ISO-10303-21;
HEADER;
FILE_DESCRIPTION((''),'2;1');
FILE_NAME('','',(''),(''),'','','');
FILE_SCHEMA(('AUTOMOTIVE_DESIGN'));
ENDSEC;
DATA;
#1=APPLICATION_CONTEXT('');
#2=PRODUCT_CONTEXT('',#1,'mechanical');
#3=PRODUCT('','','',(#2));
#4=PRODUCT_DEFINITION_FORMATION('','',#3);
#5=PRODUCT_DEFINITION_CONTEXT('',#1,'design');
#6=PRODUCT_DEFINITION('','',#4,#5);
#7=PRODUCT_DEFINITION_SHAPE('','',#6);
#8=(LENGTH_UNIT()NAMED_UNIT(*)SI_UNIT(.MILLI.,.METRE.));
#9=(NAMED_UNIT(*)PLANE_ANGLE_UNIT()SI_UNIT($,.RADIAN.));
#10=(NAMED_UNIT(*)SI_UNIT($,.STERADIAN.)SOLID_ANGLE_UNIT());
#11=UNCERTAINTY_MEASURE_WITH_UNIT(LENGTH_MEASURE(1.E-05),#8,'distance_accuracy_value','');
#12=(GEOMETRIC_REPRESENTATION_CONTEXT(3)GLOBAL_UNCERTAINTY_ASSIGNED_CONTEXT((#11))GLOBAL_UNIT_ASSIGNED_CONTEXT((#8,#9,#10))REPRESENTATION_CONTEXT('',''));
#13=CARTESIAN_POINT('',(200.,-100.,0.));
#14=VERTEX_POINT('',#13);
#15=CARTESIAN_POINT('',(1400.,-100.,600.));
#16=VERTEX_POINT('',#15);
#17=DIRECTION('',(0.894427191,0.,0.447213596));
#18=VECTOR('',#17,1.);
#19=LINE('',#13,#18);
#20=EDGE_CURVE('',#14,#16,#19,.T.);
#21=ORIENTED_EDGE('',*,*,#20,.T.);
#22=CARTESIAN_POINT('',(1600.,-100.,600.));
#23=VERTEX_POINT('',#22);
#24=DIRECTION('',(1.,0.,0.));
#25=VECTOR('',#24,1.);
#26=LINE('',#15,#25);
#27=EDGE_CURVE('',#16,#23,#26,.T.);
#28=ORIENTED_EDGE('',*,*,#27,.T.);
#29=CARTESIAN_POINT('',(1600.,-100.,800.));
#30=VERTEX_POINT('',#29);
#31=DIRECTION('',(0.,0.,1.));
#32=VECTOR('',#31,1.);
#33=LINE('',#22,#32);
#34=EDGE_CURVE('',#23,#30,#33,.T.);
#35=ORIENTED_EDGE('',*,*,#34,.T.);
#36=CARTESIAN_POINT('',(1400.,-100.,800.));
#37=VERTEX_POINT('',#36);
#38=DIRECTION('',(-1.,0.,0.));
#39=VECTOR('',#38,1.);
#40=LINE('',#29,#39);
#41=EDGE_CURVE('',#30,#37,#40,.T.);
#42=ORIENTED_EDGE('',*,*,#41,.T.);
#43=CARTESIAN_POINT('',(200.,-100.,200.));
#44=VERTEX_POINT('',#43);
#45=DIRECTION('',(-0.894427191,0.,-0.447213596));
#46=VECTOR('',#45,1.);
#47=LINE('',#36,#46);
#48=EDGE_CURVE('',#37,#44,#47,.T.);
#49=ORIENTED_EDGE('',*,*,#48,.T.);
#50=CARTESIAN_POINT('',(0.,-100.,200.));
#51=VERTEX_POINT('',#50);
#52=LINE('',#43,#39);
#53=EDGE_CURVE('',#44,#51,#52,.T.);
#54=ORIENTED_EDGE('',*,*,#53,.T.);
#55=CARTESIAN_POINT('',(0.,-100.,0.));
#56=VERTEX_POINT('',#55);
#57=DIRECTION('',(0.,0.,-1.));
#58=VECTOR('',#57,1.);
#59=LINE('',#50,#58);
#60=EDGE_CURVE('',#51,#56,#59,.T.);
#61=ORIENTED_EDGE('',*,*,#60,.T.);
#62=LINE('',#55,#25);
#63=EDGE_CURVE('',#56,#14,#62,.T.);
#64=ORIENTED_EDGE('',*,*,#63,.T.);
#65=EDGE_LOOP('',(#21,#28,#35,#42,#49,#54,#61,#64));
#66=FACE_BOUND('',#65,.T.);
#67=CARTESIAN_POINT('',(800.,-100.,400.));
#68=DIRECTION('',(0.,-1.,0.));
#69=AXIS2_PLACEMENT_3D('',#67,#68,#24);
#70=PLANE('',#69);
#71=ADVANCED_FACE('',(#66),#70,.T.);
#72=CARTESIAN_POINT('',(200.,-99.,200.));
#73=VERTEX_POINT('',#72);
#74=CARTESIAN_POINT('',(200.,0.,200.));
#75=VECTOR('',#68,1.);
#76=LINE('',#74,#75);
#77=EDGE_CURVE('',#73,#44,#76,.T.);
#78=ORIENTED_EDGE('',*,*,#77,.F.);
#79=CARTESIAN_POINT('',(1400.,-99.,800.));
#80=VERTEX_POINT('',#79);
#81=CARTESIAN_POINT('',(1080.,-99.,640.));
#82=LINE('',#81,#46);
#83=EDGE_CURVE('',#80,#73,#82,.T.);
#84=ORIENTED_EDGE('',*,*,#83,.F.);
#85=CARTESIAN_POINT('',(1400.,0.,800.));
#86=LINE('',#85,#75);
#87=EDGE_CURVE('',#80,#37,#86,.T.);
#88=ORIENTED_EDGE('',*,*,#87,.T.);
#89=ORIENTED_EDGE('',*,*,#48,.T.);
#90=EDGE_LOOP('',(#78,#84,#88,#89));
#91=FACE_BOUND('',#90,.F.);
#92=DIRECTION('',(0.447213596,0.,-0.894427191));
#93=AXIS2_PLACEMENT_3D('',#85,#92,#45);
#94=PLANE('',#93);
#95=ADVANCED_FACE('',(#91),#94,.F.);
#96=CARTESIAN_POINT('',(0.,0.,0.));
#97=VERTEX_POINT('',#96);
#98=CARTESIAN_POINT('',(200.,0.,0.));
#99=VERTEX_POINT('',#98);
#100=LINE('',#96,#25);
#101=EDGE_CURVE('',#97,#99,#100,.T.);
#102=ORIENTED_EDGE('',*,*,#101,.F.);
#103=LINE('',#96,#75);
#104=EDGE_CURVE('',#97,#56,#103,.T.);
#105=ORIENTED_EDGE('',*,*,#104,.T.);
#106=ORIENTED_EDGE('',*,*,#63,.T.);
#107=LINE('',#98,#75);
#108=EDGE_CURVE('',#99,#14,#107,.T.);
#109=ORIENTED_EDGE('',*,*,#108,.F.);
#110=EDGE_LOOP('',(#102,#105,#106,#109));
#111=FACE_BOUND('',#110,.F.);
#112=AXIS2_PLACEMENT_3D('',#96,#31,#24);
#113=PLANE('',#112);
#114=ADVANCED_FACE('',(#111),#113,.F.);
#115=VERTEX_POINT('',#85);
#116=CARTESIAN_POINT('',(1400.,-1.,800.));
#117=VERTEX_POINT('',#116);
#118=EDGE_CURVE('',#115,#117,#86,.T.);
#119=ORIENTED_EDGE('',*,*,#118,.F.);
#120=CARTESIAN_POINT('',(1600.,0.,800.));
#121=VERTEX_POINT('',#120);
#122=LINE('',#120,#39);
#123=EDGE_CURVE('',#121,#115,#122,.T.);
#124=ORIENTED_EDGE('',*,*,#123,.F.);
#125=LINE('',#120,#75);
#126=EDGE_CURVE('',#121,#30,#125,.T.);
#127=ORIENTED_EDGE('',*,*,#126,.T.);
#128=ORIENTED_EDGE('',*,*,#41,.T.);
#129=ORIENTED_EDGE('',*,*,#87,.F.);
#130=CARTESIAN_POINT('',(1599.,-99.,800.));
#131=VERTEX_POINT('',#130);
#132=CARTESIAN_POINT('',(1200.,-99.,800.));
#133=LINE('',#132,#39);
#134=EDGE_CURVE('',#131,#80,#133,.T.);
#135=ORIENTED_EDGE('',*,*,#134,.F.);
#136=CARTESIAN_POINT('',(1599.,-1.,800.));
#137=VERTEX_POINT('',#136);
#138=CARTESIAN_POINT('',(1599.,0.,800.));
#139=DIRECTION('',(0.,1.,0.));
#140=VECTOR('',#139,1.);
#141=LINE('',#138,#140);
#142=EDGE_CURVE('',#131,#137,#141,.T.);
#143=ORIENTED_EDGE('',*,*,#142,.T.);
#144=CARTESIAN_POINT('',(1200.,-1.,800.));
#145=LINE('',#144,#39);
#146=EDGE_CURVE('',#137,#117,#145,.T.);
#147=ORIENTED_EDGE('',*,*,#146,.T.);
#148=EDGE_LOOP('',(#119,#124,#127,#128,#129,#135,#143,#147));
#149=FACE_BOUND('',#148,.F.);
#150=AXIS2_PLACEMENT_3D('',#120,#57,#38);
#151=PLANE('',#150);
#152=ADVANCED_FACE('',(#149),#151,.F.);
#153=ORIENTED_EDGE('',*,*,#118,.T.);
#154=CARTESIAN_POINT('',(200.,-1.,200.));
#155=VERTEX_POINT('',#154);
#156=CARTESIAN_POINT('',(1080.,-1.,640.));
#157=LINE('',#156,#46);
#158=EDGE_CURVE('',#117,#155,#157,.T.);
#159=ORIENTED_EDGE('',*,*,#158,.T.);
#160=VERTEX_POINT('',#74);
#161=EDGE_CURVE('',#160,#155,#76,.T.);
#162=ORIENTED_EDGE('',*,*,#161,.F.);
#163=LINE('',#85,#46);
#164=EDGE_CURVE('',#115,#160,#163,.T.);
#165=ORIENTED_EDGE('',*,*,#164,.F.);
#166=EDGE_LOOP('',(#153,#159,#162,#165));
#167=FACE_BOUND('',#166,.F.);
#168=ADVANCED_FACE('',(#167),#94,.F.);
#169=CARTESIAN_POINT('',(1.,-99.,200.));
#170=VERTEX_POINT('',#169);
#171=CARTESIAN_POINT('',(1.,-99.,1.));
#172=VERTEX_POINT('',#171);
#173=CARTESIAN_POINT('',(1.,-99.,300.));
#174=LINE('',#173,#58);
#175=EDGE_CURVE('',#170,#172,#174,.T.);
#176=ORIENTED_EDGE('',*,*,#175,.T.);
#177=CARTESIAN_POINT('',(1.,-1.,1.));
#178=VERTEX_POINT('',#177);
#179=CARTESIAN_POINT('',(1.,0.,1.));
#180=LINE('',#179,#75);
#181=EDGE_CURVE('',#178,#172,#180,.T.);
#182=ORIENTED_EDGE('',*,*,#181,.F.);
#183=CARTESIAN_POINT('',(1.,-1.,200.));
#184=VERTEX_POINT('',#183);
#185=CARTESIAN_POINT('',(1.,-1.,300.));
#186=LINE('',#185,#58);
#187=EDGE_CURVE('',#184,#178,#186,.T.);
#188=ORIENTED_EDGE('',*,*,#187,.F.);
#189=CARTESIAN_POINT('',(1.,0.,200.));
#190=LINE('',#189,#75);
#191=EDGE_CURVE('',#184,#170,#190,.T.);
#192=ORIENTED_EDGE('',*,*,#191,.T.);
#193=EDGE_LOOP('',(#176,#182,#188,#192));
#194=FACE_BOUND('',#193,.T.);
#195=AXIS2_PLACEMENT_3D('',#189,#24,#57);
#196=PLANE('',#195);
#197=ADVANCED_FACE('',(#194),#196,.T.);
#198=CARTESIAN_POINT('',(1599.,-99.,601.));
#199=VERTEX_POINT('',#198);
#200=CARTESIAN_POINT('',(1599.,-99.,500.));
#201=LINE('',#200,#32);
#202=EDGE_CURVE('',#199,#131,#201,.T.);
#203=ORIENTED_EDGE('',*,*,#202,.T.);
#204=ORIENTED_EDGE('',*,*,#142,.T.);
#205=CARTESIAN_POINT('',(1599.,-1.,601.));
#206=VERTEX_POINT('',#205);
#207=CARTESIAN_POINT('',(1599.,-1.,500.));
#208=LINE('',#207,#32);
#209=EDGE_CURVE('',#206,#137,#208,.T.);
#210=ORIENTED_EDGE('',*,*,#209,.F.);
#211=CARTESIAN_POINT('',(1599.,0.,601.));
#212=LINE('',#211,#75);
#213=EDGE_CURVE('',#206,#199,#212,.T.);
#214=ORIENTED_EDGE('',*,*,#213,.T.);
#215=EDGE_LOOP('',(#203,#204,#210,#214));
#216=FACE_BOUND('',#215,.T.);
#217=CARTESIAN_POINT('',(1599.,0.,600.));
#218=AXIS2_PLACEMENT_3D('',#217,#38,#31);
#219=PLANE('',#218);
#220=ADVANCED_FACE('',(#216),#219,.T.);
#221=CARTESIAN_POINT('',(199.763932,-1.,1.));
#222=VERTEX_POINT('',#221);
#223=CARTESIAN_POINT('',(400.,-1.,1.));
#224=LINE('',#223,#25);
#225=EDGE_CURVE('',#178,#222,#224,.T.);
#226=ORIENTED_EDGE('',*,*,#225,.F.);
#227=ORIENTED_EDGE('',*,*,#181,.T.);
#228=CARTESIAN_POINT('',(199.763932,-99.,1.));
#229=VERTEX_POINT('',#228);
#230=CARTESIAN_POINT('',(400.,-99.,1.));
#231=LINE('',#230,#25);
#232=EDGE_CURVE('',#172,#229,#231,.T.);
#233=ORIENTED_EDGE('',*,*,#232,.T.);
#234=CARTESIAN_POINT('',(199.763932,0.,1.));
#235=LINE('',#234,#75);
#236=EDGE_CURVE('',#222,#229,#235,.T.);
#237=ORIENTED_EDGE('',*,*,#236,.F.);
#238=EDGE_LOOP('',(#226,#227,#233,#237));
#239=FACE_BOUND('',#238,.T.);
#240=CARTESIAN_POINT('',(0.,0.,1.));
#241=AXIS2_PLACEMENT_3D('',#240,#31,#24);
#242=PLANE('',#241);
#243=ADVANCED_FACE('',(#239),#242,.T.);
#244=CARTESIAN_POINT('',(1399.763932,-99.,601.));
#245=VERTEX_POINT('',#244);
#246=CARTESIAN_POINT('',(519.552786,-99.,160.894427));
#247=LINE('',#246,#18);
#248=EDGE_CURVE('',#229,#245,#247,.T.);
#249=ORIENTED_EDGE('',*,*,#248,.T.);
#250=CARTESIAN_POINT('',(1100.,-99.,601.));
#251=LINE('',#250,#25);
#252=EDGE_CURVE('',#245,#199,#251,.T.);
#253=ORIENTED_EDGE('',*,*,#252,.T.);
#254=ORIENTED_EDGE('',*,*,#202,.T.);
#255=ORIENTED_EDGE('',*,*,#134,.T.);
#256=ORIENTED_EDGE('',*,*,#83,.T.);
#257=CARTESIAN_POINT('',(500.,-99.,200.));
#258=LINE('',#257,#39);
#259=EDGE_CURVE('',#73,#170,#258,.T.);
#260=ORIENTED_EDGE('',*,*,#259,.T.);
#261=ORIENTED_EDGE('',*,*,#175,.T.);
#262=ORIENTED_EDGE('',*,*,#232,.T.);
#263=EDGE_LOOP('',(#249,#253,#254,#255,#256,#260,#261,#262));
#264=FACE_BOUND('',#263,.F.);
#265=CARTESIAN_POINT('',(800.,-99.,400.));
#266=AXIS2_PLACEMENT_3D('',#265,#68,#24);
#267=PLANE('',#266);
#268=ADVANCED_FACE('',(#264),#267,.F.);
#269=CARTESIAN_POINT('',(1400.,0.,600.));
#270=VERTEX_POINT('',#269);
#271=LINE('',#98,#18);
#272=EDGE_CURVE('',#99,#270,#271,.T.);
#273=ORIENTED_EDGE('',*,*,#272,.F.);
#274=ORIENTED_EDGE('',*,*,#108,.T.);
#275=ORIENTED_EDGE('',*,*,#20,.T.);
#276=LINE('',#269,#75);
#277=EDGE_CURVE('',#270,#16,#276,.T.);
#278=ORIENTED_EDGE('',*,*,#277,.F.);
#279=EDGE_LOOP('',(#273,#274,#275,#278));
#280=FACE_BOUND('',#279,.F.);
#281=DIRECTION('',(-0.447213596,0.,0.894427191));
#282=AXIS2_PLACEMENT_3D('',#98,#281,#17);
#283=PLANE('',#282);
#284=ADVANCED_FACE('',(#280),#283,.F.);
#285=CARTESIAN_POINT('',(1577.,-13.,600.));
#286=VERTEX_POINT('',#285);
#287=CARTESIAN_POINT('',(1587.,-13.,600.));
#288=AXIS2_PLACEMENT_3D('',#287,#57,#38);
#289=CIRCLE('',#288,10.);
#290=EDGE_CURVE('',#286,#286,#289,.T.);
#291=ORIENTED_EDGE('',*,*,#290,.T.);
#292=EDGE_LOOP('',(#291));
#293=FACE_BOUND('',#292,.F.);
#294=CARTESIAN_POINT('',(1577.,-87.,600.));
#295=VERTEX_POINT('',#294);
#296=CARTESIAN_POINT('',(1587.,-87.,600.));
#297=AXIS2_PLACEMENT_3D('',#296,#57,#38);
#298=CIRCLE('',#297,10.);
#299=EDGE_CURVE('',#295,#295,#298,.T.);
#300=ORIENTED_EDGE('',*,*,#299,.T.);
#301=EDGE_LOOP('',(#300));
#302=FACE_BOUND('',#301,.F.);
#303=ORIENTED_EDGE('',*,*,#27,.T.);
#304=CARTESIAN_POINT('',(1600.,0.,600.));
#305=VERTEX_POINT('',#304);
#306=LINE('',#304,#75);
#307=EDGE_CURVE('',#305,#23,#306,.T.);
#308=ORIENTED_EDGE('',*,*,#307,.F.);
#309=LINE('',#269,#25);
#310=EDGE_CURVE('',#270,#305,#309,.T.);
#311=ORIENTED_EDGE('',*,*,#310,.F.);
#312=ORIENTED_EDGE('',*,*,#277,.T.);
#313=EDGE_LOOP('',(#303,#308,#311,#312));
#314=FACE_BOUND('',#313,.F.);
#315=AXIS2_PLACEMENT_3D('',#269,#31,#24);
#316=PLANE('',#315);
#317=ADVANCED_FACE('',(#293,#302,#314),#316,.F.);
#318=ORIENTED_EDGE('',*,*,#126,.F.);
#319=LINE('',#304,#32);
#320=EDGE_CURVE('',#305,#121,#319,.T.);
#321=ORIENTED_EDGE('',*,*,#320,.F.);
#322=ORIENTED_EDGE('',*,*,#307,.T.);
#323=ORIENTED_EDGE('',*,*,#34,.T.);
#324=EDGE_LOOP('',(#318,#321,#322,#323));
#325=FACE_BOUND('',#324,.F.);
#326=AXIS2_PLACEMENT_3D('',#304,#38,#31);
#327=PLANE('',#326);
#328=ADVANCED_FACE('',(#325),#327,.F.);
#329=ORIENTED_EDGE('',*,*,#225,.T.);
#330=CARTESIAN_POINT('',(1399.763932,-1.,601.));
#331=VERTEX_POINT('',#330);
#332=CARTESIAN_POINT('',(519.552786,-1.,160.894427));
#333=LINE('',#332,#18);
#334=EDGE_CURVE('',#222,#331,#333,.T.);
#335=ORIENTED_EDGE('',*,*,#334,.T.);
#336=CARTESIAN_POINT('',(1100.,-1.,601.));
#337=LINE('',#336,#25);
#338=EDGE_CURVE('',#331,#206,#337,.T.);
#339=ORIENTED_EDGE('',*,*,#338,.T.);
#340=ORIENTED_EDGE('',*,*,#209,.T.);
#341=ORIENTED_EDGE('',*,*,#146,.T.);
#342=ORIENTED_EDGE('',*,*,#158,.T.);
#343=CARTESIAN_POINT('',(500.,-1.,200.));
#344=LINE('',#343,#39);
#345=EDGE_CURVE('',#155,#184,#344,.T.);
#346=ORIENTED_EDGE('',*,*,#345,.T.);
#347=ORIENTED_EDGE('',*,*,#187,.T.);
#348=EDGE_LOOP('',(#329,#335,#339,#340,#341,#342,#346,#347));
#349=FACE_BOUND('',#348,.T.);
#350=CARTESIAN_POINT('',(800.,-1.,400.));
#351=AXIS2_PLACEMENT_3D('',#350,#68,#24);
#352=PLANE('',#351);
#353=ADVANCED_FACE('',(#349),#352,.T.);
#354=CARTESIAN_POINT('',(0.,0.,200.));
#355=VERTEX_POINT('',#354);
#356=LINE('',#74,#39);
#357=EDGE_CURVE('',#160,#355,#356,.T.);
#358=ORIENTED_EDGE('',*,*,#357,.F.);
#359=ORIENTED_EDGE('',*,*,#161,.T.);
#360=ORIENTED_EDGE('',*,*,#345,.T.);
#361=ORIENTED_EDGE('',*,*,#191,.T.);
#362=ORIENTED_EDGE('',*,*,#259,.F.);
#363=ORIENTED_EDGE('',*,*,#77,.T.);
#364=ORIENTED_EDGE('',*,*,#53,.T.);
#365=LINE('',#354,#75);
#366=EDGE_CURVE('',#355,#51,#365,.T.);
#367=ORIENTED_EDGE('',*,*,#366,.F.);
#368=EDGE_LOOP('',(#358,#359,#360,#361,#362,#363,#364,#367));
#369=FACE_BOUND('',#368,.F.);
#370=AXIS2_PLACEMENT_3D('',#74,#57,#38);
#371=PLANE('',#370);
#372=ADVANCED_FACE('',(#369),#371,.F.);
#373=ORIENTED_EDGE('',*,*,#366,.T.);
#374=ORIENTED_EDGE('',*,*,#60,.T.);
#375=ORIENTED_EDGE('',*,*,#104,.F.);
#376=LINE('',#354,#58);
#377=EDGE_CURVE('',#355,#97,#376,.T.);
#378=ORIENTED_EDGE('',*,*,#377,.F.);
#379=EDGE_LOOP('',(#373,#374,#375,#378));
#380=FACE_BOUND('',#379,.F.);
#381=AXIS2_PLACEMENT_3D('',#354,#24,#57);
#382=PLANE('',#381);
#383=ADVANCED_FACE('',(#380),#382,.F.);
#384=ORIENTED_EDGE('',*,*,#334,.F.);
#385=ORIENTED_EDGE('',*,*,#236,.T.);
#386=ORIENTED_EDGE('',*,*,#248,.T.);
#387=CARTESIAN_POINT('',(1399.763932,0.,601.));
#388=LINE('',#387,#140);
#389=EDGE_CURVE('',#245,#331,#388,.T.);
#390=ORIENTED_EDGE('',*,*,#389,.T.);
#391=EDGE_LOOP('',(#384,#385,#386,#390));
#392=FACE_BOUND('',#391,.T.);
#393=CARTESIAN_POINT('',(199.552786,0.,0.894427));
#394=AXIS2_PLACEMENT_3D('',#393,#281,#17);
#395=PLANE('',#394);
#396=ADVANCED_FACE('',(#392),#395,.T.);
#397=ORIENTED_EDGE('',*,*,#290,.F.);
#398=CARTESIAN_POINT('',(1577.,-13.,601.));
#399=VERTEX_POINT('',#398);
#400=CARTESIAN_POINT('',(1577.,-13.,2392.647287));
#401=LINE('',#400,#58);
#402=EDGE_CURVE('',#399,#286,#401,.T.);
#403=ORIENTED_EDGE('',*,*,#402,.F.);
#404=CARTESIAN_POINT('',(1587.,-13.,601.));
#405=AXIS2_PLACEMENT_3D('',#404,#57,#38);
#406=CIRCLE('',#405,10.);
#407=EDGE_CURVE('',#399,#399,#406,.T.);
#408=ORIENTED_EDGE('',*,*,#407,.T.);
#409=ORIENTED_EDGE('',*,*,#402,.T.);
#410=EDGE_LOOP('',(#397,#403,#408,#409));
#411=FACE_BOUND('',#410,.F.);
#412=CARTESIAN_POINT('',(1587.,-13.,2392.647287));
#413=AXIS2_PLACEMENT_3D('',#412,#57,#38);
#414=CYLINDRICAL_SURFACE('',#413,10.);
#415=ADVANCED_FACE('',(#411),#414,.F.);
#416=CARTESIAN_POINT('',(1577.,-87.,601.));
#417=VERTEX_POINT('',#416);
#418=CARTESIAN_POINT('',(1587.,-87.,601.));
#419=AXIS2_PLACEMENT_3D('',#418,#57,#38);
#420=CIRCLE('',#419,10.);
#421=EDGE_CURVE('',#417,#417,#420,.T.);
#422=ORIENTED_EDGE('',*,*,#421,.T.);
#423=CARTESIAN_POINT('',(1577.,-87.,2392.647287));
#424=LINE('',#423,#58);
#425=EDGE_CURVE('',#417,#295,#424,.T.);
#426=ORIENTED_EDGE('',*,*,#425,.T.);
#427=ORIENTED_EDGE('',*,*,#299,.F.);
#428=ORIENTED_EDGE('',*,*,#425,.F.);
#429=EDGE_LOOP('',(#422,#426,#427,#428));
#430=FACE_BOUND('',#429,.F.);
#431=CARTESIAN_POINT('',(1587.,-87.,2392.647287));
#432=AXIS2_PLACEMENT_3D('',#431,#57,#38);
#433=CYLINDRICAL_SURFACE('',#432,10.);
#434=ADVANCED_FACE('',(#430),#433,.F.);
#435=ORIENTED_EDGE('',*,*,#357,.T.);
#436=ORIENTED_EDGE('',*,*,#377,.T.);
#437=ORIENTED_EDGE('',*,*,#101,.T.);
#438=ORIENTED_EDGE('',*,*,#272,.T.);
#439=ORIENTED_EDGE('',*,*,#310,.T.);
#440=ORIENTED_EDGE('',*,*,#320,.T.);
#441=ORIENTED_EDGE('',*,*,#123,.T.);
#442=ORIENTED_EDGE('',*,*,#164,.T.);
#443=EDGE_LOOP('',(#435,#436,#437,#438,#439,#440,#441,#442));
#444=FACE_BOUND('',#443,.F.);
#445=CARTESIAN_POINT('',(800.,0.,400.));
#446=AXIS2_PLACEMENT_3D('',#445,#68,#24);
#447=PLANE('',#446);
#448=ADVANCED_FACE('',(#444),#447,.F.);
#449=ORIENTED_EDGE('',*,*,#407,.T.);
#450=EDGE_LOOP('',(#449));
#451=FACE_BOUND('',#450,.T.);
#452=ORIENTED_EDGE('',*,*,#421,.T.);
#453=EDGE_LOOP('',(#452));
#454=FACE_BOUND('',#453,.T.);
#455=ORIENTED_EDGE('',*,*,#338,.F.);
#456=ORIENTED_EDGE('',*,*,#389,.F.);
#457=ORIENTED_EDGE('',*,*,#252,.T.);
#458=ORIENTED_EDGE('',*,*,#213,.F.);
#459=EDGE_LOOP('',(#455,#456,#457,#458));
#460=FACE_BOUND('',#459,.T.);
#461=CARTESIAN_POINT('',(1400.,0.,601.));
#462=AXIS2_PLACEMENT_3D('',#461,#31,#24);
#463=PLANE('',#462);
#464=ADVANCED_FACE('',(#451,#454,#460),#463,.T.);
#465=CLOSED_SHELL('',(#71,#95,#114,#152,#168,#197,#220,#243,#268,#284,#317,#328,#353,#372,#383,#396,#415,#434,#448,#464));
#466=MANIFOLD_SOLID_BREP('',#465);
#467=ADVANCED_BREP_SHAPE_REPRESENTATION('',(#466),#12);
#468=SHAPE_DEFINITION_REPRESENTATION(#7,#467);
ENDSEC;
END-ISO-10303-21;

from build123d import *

# Parameters (mm, degrees)
F1_DEPTH = 100
F2_T     = -1
F5_D     = 20


# Not quite as in the source:
# - the program builds the solid bodies; features that only make, move or delete a surface that nothing else refers to are left out


with BuildPart() as f1:
    # F0 (on Front) → F1 (new body)
    with BuildSketch(Plane.XZ):
        Polygon((0, 200), (0, 0), (200, 0), (1400, 600), (1600, 600), (1600, 800), (1400, 800), (200, 200), align=None)
    extrude(amount=F1_DEPTH)

    # F2
    f2_openings = [f1.faces().sort_by_distance(p)[0] for p in [
        (100, -50, 200),
        (1500, -50, 800),
        (800, -50, 500),
    ]]
    offset(amount=F2_T, openings=f2_openings, kind=Kind.INTERSECTION)

    # F5 (through all)
    with Locations(Plane.XY.offset(601)):
        with Locations((1587, -13), (1587, -87)):
            Hole(F5_D / 2)


solid = f1.part
